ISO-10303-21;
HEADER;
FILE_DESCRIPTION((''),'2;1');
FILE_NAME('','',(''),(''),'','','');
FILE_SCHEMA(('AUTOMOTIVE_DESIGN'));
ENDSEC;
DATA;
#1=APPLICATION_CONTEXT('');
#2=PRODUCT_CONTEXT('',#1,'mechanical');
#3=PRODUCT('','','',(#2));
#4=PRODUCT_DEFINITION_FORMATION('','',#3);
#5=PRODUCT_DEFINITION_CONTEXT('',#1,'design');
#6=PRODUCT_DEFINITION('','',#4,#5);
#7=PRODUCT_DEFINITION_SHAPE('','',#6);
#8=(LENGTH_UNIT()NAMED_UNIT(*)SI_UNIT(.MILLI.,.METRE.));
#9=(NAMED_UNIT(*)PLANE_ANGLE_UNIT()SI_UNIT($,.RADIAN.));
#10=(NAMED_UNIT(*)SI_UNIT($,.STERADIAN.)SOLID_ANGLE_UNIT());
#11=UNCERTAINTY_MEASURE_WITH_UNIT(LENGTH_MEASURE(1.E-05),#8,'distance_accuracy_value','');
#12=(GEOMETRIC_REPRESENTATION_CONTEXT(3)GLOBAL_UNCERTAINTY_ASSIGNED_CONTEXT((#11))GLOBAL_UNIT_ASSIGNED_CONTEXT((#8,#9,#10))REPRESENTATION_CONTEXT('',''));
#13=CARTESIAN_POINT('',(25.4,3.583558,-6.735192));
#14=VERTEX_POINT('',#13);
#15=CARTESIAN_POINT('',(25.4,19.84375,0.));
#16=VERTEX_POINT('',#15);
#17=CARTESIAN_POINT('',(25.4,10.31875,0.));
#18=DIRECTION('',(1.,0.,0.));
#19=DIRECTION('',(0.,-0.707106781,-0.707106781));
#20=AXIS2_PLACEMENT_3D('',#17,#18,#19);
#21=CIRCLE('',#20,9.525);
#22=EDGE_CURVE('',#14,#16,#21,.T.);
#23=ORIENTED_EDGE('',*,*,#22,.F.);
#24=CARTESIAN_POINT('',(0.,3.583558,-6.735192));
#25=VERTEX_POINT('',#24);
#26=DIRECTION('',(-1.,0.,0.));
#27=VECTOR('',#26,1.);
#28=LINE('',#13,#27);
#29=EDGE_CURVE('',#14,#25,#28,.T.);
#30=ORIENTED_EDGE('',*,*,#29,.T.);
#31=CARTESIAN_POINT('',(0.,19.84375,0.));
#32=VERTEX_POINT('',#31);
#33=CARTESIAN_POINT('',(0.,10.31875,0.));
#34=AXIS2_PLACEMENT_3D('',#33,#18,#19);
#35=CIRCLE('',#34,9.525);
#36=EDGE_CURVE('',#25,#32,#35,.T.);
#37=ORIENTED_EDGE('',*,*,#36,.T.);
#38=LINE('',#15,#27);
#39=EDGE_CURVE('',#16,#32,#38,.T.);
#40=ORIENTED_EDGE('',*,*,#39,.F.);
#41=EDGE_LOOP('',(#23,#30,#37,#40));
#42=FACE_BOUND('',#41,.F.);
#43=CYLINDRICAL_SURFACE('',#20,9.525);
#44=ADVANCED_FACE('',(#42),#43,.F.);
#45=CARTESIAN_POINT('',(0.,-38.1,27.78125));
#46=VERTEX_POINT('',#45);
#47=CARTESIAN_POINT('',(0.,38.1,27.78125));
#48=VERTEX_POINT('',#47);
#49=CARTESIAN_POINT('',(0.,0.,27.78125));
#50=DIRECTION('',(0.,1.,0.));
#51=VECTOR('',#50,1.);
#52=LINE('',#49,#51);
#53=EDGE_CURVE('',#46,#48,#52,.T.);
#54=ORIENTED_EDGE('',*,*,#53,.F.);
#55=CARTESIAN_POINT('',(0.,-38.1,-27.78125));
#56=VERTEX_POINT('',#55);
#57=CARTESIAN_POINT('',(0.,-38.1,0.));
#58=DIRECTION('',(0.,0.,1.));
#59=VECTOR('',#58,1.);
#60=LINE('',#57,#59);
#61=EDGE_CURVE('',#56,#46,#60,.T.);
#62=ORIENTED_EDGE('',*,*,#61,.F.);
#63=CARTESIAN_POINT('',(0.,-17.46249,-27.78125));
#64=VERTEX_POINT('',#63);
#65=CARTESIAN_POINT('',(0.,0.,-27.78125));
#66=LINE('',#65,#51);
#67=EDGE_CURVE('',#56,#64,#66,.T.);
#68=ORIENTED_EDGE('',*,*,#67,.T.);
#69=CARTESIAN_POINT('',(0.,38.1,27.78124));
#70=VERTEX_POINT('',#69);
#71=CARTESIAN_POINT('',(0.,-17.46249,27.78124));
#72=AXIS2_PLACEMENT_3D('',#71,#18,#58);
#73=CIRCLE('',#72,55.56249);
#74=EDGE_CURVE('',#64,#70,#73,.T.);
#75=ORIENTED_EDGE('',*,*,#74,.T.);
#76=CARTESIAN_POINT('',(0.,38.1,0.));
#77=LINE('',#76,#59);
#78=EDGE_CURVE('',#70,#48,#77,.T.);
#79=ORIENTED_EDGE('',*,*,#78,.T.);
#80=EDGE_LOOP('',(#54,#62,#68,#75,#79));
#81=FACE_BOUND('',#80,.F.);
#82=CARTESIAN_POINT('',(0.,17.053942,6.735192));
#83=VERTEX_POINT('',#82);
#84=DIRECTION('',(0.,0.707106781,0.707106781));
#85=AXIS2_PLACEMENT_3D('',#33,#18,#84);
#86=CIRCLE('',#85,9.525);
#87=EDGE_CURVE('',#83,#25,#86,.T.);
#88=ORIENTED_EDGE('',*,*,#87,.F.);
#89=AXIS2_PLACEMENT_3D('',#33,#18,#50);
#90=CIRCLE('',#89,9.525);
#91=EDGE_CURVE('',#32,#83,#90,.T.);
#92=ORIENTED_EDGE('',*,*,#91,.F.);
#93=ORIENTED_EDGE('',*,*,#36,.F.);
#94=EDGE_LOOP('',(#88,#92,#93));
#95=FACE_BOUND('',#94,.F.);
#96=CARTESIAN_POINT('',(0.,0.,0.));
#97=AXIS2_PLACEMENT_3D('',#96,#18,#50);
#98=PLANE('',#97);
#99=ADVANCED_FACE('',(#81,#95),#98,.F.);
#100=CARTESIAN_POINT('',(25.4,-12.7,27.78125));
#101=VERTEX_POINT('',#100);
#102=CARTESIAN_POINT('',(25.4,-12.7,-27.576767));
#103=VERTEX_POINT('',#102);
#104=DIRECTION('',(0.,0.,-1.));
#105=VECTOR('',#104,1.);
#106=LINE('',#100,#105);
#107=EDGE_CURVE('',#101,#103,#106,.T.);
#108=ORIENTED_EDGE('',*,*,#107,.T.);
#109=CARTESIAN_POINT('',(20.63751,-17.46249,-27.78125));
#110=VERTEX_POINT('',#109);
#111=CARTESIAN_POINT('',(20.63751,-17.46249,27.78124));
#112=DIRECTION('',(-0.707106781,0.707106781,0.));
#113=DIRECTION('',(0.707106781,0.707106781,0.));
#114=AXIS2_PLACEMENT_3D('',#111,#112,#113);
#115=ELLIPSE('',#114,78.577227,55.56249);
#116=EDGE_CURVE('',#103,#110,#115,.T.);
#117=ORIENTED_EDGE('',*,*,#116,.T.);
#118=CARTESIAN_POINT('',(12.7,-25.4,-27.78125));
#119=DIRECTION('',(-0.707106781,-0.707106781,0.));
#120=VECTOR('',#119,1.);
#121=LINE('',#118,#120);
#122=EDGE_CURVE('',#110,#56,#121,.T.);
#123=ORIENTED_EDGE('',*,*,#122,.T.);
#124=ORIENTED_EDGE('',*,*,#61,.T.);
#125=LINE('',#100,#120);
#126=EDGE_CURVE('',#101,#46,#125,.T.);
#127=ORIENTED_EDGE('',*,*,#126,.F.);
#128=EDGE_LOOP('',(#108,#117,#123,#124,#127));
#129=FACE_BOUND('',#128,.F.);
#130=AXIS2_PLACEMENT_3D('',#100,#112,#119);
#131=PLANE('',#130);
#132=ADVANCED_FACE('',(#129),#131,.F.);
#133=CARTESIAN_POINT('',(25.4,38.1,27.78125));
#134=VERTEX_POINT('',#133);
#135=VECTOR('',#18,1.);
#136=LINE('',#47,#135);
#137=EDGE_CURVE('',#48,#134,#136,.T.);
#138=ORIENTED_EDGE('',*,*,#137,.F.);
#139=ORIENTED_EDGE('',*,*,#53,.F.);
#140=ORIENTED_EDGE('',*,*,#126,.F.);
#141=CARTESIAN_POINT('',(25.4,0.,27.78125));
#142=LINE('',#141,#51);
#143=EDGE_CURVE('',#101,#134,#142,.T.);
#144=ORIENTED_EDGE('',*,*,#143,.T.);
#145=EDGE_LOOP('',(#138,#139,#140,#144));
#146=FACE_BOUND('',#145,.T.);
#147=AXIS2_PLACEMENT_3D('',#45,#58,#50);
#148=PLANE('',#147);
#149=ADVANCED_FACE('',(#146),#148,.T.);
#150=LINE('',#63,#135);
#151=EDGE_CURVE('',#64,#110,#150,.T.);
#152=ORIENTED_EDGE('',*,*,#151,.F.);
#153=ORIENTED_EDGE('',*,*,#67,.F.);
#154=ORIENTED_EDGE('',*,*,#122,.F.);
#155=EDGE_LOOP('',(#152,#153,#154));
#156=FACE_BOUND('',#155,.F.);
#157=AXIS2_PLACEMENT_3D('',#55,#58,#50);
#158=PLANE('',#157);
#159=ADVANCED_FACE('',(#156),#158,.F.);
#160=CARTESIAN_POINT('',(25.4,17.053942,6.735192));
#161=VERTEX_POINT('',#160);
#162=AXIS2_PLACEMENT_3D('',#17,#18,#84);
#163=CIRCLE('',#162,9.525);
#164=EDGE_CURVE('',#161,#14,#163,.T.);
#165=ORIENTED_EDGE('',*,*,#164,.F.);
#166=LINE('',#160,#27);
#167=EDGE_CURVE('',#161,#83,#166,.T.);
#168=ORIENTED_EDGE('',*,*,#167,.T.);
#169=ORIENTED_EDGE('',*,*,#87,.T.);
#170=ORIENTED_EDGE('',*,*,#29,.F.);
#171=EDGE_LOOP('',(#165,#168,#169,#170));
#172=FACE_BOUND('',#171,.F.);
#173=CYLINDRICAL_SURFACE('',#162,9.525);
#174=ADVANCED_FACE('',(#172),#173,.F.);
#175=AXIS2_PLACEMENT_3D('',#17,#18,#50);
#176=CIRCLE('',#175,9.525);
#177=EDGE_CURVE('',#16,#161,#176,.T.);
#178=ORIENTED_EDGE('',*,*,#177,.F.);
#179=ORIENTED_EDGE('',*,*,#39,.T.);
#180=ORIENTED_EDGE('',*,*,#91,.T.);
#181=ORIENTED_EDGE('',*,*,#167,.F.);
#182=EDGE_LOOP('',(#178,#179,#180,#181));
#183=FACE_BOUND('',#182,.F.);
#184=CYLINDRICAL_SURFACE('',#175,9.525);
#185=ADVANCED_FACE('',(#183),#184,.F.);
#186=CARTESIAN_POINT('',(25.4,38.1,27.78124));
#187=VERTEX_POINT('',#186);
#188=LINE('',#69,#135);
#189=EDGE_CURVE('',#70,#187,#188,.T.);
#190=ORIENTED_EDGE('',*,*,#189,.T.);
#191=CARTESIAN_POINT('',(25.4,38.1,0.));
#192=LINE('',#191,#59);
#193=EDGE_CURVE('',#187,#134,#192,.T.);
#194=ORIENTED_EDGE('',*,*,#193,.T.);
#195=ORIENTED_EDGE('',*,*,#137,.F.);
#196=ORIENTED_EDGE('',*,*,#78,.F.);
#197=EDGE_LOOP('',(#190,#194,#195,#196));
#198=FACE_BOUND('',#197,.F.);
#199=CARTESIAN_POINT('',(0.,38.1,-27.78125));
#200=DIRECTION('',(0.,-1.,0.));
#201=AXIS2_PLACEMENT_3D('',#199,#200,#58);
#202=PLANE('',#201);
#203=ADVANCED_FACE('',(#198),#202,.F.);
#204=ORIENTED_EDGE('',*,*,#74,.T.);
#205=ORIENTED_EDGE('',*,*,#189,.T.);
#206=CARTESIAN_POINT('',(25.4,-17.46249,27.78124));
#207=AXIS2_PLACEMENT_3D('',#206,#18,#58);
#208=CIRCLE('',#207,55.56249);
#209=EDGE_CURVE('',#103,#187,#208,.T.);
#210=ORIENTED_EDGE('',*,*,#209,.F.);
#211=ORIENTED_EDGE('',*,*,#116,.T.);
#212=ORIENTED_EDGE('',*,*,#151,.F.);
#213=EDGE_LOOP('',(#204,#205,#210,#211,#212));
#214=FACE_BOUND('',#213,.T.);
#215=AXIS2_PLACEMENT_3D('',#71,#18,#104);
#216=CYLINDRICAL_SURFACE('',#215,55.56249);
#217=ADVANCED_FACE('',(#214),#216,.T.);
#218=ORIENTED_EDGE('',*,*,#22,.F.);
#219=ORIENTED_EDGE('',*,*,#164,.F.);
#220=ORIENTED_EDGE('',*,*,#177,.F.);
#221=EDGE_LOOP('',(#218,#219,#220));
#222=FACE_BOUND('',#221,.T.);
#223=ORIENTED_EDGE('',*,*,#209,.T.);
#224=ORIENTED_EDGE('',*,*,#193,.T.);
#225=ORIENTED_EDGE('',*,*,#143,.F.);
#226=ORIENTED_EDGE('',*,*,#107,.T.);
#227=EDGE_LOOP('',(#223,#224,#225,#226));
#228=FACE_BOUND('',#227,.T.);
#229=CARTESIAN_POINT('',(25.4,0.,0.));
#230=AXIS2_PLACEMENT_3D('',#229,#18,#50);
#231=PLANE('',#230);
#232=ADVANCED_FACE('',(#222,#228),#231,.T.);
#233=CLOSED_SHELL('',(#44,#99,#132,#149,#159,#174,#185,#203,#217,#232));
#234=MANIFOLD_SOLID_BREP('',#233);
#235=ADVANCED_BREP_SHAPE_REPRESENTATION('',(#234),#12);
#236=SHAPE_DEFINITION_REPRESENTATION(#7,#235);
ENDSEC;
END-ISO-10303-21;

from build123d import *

# Parameters (mm, degrees)
F0_W     = 76.2
F0_H     = 55.5625
F1_DEPTH = 25.4
F2_R     = 55.56249
F4_DEPTH = 25.4
F6_DEPTH = 55.5635


# Not quite as in the source:
# - a fillet or chamfer is up to 0.001 mm smaller than in the source, because OpenCascade refuses the exact size


with BuildPart() as f1:
    # F0 (on Right) → F1 (new body)
    with BuildSketch(Plane.YZ):
        Rectangle(F0_W, F0_H)
    extrude(amount=F1_DEPTH)

    # F2 (radius 55.5625 in the source; OpenCascade refuses exactly that, so slightly less here)
    f2_edges = [f1.edges().sort_by_distance(p)[0] for p in [
        (12.7, 38.1, -27.78125),
    ]]
    fillet(f2_edges, radius=F2_R)

    # F3 (on face) → F4 (cut)
    with BuildSketch(Plane.YZ.offset(25.4)):
        with BuildLine():
            ThreePointArc((17.0539420908, 6.7351920908), (3.5835579092, 6.7351920908), (3.5835579092, -6.7351920908))
            Line((3.5835579092, -6.7351920908), (17.0539420908, 6.7351920908))
        make_face()
        with BuildLine():
            Line((17.0539420908, 6.7351920908), (3.5835579092, -6.7351920908))
            ThreePointArc((3.5835579092, -6.7351920908), (13.9638096933, -8.7999525472), (19.84375, 0))
            ThreePointArc((19.84375, 0), (19.1187025472, 3.6450596933), (17.0539420908, 6.7351920908))
        make_face()
    extrude(amount=-F4_DEPTH, mode=Mode.SUBTRACT)

    # F5 (on face) → F6 (cut, through all)
    with BuildSketch(Plane.XY.offset(27.78125)):
        Polygon((25.4, -12.7), (0, -38.1), (25.4, -38.1), align=None)
    extrude(amount=-F6_DEPTH, mode=Mode.SUBTRACT)


solid = f1.part
